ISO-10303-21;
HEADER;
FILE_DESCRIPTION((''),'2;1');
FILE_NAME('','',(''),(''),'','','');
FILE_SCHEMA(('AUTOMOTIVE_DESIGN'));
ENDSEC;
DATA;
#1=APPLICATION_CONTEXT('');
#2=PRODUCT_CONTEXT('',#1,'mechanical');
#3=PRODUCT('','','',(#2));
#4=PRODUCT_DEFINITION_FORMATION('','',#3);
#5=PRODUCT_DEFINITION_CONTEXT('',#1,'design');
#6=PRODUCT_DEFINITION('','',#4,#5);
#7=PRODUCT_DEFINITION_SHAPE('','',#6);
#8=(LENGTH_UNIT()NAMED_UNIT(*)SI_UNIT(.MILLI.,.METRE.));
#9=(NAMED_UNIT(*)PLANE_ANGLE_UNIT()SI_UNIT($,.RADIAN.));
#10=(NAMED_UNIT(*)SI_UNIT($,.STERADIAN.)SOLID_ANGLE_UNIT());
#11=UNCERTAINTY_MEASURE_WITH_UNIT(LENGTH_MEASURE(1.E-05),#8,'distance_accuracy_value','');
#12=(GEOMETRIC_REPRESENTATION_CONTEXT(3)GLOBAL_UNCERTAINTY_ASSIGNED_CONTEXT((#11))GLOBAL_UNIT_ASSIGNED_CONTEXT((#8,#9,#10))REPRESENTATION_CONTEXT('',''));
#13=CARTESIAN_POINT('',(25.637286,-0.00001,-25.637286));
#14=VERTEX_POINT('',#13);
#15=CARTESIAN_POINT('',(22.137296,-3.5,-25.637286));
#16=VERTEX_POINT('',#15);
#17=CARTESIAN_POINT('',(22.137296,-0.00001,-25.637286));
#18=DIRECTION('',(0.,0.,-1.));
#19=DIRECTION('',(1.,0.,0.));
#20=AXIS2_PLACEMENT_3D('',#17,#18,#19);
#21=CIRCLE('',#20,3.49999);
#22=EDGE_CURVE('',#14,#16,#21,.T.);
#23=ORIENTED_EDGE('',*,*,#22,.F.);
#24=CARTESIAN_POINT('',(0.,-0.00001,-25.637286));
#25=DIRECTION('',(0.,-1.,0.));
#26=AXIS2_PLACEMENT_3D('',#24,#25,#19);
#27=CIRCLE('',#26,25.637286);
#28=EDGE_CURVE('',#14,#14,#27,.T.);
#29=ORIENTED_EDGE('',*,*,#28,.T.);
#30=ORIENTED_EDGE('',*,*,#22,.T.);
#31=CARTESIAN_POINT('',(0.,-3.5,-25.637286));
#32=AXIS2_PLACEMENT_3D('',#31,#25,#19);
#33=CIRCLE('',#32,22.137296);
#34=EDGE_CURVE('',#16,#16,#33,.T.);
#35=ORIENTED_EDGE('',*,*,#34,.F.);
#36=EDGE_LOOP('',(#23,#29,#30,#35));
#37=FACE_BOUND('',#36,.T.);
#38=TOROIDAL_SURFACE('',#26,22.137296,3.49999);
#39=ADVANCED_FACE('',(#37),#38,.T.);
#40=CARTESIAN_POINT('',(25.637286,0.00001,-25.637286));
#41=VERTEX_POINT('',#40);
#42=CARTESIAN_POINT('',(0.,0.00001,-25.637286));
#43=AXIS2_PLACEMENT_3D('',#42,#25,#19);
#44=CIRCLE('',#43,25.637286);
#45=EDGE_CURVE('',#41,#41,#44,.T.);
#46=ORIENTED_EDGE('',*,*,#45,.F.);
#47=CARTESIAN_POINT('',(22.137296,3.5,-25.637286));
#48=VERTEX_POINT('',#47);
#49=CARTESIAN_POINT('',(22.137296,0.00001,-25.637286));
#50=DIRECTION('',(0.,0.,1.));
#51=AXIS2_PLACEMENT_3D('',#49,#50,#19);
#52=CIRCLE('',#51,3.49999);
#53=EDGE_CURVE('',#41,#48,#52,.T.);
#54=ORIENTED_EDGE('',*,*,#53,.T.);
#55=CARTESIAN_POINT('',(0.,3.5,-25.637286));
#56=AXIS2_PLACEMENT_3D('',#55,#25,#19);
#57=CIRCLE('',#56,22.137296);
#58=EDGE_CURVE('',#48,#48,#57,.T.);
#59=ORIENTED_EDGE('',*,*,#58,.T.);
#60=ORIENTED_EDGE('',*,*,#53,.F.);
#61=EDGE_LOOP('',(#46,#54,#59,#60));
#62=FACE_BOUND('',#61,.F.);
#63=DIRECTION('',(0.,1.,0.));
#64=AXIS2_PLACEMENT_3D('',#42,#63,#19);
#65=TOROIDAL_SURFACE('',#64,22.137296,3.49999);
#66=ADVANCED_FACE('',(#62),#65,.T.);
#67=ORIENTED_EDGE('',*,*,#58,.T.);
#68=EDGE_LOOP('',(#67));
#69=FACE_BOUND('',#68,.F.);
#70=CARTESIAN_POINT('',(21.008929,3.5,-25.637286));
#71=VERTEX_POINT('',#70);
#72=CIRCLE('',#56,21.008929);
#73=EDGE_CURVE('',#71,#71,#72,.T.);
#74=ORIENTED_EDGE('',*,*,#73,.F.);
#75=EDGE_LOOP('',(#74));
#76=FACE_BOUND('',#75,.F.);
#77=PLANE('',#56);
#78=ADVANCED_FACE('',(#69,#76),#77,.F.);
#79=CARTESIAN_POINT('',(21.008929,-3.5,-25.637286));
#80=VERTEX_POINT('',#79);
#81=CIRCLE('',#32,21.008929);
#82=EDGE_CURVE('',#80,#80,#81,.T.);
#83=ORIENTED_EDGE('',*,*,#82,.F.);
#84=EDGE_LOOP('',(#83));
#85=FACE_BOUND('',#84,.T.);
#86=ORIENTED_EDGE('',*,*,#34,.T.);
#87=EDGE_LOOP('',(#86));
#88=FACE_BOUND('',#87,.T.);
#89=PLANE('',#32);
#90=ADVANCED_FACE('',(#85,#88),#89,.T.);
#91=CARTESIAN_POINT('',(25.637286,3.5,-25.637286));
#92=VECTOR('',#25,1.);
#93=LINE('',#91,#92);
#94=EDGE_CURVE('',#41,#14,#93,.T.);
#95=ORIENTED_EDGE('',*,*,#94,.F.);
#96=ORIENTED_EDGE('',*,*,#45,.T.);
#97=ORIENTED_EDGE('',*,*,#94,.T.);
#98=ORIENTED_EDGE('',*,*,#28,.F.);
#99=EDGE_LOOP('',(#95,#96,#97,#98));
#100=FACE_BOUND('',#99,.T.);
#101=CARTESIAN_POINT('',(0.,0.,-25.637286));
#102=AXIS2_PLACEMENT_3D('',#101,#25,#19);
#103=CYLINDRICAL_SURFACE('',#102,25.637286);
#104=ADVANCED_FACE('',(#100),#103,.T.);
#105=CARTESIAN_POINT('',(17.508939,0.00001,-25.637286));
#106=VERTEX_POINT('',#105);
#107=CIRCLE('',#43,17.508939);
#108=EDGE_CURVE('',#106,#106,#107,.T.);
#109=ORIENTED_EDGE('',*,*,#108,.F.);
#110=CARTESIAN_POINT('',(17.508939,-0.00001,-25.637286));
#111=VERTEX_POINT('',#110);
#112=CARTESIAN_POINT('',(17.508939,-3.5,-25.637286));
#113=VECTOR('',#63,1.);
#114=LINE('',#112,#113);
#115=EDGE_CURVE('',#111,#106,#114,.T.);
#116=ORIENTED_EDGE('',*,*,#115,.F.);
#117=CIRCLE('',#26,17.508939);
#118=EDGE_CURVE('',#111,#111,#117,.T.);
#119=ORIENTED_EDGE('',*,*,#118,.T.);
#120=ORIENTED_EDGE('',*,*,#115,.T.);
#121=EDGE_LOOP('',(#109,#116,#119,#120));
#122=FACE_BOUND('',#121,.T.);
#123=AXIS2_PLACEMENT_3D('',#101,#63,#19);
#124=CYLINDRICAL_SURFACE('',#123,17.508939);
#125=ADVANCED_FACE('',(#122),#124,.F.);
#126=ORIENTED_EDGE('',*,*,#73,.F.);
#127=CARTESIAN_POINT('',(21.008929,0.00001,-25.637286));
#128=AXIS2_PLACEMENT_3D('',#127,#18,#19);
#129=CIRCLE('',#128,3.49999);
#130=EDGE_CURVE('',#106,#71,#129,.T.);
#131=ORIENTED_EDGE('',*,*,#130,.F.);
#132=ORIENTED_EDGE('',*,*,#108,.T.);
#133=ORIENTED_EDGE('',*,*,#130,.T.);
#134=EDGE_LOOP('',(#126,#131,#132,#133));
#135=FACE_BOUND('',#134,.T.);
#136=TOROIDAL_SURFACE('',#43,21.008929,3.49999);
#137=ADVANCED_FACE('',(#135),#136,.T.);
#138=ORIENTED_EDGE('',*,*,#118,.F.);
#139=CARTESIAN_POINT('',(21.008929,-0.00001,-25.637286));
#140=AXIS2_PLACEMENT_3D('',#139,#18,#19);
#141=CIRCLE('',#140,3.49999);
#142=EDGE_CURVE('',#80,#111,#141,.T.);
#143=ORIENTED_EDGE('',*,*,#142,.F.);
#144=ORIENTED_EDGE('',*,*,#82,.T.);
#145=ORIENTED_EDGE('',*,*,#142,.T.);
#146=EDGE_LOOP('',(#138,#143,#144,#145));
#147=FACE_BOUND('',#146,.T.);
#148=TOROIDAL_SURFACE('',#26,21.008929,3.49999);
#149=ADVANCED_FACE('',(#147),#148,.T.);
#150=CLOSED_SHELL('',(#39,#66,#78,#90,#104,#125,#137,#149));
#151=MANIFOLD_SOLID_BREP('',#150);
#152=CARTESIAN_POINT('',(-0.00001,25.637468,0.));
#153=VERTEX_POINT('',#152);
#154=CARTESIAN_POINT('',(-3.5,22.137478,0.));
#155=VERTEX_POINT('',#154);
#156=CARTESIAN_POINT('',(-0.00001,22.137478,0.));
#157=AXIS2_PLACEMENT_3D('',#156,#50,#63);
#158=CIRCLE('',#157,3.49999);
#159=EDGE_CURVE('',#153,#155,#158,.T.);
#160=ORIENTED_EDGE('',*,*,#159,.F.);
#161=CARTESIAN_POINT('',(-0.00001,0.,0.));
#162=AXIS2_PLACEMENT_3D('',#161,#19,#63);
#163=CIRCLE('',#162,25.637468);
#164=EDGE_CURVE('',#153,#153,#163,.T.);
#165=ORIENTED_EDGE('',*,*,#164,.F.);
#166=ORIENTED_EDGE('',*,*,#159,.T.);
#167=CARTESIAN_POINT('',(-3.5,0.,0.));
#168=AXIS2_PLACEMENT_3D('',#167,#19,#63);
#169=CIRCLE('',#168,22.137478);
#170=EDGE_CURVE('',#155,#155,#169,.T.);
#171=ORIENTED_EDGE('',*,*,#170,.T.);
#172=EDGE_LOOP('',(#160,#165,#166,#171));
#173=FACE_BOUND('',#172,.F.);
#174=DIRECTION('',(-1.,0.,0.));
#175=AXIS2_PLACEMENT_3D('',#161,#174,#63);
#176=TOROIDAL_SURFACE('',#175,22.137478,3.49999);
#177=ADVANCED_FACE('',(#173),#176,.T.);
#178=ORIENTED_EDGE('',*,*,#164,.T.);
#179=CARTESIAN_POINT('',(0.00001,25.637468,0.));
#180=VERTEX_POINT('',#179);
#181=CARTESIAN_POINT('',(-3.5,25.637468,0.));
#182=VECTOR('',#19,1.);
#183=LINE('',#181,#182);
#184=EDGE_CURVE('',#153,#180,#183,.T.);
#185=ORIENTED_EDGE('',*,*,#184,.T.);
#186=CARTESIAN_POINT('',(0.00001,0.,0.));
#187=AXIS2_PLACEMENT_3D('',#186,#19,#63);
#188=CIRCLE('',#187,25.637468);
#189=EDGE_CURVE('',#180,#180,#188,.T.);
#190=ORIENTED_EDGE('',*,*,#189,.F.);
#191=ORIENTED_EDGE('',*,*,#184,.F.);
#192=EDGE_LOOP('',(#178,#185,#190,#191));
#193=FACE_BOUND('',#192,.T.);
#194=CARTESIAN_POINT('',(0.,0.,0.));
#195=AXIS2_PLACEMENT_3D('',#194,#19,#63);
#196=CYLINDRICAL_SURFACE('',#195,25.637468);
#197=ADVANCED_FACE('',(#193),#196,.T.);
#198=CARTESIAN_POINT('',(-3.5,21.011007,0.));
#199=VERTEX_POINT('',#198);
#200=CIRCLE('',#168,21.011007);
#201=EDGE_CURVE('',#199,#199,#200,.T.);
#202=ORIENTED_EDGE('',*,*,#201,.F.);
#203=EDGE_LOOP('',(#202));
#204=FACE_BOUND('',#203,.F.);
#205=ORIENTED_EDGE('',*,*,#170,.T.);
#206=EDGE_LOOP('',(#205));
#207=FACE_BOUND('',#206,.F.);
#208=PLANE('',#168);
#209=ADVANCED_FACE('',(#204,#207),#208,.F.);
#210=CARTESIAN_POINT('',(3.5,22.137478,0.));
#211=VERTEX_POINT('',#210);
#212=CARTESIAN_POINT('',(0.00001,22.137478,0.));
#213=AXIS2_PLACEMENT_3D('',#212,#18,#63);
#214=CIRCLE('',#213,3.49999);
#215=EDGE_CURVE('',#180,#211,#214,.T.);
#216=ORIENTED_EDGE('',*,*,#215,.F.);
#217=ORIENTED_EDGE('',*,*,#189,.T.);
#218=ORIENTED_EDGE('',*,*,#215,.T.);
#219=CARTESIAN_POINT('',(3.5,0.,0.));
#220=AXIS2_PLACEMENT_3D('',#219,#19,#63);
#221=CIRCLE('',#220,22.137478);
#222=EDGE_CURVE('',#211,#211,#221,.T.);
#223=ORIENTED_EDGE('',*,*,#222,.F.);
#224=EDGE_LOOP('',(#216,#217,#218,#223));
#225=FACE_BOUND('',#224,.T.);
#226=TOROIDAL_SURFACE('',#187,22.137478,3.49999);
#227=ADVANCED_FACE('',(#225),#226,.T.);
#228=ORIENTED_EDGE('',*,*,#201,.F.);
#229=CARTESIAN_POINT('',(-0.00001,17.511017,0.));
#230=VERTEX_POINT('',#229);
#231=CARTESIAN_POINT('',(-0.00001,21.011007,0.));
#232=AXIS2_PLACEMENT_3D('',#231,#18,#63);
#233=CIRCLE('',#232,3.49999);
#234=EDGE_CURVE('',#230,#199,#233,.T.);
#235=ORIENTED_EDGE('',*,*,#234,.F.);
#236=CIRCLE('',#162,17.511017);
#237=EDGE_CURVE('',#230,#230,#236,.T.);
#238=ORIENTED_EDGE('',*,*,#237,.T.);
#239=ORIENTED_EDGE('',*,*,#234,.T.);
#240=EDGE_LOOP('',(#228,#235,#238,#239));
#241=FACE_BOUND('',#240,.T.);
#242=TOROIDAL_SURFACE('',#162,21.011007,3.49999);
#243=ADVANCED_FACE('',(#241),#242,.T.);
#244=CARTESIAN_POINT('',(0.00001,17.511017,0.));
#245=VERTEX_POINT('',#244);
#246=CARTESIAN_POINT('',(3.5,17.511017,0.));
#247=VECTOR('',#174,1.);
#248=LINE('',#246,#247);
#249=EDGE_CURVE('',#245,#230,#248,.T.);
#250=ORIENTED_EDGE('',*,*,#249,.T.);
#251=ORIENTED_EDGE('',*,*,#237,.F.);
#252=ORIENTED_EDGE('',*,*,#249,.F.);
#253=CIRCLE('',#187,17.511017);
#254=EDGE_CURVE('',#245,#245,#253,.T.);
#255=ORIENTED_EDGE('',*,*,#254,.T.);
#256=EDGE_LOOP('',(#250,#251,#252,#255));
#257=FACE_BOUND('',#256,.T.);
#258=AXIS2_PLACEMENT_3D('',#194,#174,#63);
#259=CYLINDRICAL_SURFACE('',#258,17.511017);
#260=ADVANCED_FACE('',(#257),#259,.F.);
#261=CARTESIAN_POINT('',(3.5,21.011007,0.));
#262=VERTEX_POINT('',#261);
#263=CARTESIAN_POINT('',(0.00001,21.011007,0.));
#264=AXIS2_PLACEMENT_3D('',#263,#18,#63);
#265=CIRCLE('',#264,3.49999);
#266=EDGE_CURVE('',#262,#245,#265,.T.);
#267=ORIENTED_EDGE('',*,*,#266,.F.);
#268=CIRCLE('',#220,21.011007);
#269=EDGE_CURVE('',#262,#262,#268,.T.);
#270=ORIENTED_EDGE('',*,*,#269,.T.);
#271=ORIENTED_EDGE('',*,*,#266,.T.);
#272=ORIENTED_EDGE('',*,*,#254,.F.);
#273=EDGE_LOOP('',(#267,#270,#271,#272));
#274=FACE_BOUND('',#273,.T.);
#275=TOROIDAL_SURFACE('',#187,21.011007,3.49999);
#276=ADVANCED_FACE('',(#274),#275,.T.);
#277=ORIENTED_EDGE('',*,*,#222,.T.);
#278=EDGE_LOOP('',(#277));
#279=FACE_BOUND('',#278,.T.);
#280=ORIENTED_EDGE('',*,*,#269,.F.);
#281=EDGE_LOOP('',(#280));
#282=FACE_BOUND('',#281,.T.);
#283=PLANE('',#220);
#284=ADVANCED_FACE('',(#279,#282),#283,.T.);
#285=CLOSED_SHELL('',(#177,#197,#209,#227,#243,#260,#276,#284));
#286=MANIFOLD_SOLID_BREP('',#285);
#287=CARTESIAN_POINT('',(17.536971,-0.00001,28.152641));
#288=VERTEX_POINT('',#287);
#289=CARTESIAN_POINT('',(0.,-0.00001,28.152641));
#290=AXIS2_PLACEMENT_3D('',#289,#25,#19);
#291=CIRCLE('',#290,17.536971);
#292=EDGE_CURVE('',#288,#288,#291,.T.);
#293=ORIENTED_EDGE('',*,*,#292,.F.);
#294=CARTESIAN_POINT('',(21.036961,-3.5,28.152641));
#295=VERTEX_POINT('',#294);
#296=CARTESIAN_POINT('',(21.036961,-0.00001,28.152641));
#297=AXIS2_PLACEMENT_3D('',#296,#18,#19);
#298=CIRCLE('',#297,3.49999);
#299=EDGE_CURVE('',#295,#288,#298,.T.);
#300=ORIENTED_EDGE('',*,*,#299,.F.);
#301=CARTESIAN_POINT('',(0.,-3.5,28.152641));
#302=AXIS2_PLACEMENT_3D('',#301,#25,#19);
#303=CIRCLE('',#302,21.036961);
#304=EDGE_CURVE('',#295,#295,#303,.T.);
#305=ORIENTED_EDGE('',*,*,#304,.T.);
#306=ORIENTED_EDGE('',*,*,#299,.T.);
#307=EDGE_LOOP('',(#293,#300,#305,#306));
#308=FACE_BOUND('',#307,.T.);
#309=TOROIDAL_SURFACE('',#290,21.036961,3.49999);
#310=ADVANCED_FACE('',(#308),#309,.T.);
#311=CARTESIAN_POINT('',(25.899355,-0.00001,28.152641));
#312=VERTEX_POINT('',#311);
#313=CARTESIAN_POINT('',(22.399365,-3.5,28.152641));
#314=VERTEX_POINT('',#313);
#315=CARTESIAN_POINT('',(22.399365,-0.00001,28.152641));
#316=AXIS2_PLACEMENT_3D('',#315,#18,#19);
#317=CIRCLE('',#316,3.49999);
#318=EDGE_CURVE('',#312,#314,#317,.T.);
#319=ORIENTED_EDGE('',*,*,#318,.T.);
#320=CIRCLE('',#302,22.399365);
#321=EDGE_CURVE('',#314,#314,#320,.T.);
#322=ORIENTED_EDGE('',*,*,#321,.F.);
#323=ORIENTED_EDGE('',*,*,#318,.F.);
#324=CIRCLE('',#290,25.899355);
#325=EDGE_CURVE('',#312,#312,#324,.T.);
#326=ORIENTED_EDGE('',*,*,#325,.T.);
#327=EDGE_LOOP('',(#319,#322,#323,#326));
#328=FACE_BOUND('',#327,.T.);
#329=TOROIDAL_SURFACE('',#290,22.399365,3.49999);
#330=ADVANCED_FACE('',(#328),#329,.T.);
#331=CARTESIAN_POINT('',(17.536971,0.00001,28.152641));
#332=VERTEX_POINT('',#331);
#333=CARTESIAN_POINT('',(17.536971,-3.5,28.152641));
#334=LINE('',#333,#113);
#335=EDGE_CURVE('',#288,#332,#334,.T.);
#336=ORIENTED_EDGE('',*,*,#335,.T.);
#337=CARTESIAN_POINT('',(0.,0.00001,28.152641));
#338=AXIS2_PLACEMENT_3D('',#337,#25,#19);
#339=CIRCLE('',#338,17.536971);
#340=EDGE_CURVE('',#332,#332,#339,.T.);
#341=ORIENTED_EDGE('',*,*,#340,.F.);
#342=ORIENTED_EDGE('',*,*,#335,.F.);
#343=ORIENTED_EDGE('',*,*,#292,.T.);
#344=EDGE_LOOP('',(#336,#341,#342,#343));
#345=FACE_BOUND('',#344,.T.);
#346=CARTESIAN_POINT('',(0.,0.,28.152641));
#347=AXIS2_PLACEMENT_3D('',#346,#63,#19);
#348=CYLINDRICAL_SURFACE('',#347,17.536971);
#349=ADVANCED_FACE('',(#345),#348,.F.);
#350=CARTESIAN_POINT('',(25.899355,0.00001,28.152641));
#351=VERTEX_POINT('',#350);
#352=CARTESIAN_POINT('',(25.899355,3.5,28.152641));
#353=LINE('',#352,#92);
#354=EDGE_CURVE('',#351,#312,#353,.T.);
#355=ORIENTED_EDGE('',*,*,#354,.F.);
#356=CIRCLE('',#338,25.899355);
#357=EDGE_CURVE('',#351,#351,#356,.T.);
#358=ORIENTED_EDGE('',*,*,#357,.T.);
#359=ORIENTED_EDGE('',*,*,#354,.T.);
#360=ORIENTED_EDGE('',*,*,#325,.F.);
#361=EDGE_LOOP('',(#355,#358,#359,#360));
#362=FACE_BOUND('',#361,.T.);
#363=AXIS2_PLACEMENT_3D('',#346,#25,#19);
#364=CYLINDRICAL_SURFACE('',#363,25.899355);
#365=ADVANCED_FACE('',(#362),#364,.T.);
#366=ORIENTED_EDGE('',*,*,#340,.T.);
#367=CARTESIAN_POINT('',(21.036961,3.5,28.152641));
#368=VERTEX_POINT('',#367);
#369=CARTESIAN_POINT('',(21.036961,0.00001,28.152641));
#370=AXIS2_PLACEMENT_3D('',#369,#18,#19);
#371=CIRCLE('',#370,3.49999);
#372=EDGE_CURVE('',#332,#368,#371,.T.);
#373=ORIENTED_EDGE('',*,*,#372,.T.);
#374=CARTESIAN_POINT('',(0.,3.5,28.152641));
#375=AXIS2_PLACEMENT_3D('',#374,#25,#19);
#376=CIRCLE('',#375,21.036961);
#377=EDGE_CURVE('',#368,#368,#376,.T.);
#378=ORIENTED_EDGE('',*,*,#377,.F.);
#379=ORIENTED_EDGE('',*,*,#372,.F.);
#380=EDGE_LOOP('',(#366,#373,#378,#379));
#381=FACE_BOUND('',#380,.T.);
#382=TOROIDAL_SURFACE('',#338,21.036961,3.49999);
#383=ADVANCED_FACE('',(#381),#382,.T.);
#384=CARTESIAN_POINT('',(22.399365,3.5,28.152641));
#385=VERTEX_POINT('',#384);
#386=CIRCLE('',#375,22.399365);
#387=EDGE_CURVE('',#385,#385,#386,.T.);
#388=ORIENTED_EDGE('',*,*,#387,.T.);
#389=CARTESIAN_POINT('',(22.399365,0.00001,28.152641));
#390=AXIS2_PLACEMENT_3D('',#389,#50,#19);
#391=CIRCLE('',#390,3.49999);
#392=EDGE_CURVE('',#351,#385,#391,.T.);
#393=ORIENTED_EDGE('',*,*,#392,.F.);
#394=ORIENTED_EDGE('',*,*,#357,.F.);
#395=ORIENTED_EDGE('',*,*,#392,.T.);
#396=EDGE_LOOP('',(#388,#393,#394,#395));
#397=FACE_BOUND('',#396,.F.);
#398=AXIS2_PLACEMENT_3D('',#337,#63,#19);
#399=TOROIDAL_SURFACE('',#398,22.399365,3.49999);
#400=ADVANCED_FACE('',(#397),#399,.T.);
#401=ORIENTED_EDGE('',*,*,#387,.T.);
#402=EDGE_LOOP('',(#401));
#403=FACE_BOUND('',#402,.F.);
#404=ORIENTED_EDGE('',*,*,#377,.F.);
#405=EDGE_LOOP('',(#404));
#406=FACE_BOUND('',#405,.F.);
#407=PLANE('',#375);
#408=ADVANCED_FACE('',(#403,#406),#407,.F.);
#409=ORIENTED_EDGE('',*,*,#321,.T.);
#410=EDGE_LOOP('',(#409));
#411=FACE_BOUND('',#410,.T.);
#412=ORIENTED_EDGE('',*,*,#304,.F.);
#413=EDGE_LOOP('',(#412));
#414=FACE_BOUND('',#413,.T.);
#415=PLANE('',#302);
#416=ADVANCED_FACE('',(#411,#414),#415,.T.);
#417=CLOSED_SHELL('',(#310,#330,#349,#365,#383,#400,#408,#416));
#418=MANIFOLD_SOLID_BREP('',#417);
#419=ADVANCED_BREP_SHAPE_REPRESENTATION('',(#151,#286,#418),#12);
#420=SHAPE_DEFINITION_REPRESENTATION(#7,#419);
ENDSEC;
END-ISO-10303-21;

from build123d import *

# Parameters (mm, degrees)
F0_R     = 25.6374683223
F0_R_2   = 17.5110166509
F1_DEPTH = 3.5
F2_R     = 25.6372857839
F2_R_2   = 17.5089394863
F3_DEPTH = 3.5
F4_R     = 25.8993554988
F4_R_2   = 17.5369714652
F5_DEPTH = 3.5
F6_R     = 3.49999
F6_2_R   = 3.49999
F6_3_R   = 3.49999


# Not quite as in the source:
# - a fillet or chamfer is up to 0.001 mm smaller than in the source, because OpenCascade refuses the exact size


with BuildPart() as f1:
    # F0 (on Right) → F1 (new body, symmetric)
    with BuildSketch(Plane.YZ):
        Circle(F0_R)
        Circle(F0_R_2, mode=Mode.SUBTRACT)
    extrude(amount=F1_DEPTH, both=True)

    # F6#3 (radius 3.5 in the source; OpenCascade refuses exactly that, so slightly less here)
    f6_3_edges = [f1.edges().sort_by_distance(p)[0] for p in [
        (3.5, -25.637468, 0),
        (3.5, -17.511017, 0),
        (-3.5, -25.637468, 0),
        (-3.5, -17.511017, 0),
    ]]
    fillet(f6_3_edges, radius=F6_3_R)


with BuildPart() as f3:
    # F2 (on Front) → F3 (new body, symmetric)
    with BuildSketch(Plane.XZ):
        with Locations((0, -25.6372857839)):
            Circle(F2_R)
        with Locations((0, -25.6372857839)):
            Circle(F2_R_2, mode=Mode.SUBTRACT)
    extrude(amount=F3_DEPTH, both=True)

    # F6#2 (radius 3.5 in the source; OpenCascade refuses exactly that, so slightly less here)
    f6_2_edges = [f3.edges().sort_by_distance(p)[0] for p in [
        (-17.508939, -3.5, -25.637286),
        (17.508939, 0, -25.637286),
        (-17.508939, 3.5, -25.637286),
        (-25.637286, 3.5, -25.637286),
        (25.637286, 0, -25.637286),
        (-25.637286, -3.5, -25.637286),
    ]]
    fillet(f6_2_edges, radius=F6_2_R)


with BuildPart() as f5:
    # F4 (on Front) → F5 (new body, symmetric)
    with BuildSketch(Plane.XZ):
        with Locations((0, 28.152640909)):
            Circle(F4_R)
        with Locations((0, 28.152640909)):
            Circle(F4_R_2, mode=Mode.SUBTRACT)
    extrude(amount=F5_DEPTH, both=True)

    # F6 (radius 3.5 in the source; OpenCascade refuses exactly that, so slightly less here)
    f6_edges = [f5.edges().sort_by_distance(p)[0] for p in [
        (-25.899355, -3.5, 28.152641),
        (-25.899355, 3.5, 28.152641),
        (-17.536971, -3.5, 28.152641),
        (17.536971, 0, 28.152641),
        (-17.536971, 3.5, 28.152641),
    ]]
    fillet(f6_edges, radius=F6_R)


solid = Compound([f1.part, f3.part, f5.part])
